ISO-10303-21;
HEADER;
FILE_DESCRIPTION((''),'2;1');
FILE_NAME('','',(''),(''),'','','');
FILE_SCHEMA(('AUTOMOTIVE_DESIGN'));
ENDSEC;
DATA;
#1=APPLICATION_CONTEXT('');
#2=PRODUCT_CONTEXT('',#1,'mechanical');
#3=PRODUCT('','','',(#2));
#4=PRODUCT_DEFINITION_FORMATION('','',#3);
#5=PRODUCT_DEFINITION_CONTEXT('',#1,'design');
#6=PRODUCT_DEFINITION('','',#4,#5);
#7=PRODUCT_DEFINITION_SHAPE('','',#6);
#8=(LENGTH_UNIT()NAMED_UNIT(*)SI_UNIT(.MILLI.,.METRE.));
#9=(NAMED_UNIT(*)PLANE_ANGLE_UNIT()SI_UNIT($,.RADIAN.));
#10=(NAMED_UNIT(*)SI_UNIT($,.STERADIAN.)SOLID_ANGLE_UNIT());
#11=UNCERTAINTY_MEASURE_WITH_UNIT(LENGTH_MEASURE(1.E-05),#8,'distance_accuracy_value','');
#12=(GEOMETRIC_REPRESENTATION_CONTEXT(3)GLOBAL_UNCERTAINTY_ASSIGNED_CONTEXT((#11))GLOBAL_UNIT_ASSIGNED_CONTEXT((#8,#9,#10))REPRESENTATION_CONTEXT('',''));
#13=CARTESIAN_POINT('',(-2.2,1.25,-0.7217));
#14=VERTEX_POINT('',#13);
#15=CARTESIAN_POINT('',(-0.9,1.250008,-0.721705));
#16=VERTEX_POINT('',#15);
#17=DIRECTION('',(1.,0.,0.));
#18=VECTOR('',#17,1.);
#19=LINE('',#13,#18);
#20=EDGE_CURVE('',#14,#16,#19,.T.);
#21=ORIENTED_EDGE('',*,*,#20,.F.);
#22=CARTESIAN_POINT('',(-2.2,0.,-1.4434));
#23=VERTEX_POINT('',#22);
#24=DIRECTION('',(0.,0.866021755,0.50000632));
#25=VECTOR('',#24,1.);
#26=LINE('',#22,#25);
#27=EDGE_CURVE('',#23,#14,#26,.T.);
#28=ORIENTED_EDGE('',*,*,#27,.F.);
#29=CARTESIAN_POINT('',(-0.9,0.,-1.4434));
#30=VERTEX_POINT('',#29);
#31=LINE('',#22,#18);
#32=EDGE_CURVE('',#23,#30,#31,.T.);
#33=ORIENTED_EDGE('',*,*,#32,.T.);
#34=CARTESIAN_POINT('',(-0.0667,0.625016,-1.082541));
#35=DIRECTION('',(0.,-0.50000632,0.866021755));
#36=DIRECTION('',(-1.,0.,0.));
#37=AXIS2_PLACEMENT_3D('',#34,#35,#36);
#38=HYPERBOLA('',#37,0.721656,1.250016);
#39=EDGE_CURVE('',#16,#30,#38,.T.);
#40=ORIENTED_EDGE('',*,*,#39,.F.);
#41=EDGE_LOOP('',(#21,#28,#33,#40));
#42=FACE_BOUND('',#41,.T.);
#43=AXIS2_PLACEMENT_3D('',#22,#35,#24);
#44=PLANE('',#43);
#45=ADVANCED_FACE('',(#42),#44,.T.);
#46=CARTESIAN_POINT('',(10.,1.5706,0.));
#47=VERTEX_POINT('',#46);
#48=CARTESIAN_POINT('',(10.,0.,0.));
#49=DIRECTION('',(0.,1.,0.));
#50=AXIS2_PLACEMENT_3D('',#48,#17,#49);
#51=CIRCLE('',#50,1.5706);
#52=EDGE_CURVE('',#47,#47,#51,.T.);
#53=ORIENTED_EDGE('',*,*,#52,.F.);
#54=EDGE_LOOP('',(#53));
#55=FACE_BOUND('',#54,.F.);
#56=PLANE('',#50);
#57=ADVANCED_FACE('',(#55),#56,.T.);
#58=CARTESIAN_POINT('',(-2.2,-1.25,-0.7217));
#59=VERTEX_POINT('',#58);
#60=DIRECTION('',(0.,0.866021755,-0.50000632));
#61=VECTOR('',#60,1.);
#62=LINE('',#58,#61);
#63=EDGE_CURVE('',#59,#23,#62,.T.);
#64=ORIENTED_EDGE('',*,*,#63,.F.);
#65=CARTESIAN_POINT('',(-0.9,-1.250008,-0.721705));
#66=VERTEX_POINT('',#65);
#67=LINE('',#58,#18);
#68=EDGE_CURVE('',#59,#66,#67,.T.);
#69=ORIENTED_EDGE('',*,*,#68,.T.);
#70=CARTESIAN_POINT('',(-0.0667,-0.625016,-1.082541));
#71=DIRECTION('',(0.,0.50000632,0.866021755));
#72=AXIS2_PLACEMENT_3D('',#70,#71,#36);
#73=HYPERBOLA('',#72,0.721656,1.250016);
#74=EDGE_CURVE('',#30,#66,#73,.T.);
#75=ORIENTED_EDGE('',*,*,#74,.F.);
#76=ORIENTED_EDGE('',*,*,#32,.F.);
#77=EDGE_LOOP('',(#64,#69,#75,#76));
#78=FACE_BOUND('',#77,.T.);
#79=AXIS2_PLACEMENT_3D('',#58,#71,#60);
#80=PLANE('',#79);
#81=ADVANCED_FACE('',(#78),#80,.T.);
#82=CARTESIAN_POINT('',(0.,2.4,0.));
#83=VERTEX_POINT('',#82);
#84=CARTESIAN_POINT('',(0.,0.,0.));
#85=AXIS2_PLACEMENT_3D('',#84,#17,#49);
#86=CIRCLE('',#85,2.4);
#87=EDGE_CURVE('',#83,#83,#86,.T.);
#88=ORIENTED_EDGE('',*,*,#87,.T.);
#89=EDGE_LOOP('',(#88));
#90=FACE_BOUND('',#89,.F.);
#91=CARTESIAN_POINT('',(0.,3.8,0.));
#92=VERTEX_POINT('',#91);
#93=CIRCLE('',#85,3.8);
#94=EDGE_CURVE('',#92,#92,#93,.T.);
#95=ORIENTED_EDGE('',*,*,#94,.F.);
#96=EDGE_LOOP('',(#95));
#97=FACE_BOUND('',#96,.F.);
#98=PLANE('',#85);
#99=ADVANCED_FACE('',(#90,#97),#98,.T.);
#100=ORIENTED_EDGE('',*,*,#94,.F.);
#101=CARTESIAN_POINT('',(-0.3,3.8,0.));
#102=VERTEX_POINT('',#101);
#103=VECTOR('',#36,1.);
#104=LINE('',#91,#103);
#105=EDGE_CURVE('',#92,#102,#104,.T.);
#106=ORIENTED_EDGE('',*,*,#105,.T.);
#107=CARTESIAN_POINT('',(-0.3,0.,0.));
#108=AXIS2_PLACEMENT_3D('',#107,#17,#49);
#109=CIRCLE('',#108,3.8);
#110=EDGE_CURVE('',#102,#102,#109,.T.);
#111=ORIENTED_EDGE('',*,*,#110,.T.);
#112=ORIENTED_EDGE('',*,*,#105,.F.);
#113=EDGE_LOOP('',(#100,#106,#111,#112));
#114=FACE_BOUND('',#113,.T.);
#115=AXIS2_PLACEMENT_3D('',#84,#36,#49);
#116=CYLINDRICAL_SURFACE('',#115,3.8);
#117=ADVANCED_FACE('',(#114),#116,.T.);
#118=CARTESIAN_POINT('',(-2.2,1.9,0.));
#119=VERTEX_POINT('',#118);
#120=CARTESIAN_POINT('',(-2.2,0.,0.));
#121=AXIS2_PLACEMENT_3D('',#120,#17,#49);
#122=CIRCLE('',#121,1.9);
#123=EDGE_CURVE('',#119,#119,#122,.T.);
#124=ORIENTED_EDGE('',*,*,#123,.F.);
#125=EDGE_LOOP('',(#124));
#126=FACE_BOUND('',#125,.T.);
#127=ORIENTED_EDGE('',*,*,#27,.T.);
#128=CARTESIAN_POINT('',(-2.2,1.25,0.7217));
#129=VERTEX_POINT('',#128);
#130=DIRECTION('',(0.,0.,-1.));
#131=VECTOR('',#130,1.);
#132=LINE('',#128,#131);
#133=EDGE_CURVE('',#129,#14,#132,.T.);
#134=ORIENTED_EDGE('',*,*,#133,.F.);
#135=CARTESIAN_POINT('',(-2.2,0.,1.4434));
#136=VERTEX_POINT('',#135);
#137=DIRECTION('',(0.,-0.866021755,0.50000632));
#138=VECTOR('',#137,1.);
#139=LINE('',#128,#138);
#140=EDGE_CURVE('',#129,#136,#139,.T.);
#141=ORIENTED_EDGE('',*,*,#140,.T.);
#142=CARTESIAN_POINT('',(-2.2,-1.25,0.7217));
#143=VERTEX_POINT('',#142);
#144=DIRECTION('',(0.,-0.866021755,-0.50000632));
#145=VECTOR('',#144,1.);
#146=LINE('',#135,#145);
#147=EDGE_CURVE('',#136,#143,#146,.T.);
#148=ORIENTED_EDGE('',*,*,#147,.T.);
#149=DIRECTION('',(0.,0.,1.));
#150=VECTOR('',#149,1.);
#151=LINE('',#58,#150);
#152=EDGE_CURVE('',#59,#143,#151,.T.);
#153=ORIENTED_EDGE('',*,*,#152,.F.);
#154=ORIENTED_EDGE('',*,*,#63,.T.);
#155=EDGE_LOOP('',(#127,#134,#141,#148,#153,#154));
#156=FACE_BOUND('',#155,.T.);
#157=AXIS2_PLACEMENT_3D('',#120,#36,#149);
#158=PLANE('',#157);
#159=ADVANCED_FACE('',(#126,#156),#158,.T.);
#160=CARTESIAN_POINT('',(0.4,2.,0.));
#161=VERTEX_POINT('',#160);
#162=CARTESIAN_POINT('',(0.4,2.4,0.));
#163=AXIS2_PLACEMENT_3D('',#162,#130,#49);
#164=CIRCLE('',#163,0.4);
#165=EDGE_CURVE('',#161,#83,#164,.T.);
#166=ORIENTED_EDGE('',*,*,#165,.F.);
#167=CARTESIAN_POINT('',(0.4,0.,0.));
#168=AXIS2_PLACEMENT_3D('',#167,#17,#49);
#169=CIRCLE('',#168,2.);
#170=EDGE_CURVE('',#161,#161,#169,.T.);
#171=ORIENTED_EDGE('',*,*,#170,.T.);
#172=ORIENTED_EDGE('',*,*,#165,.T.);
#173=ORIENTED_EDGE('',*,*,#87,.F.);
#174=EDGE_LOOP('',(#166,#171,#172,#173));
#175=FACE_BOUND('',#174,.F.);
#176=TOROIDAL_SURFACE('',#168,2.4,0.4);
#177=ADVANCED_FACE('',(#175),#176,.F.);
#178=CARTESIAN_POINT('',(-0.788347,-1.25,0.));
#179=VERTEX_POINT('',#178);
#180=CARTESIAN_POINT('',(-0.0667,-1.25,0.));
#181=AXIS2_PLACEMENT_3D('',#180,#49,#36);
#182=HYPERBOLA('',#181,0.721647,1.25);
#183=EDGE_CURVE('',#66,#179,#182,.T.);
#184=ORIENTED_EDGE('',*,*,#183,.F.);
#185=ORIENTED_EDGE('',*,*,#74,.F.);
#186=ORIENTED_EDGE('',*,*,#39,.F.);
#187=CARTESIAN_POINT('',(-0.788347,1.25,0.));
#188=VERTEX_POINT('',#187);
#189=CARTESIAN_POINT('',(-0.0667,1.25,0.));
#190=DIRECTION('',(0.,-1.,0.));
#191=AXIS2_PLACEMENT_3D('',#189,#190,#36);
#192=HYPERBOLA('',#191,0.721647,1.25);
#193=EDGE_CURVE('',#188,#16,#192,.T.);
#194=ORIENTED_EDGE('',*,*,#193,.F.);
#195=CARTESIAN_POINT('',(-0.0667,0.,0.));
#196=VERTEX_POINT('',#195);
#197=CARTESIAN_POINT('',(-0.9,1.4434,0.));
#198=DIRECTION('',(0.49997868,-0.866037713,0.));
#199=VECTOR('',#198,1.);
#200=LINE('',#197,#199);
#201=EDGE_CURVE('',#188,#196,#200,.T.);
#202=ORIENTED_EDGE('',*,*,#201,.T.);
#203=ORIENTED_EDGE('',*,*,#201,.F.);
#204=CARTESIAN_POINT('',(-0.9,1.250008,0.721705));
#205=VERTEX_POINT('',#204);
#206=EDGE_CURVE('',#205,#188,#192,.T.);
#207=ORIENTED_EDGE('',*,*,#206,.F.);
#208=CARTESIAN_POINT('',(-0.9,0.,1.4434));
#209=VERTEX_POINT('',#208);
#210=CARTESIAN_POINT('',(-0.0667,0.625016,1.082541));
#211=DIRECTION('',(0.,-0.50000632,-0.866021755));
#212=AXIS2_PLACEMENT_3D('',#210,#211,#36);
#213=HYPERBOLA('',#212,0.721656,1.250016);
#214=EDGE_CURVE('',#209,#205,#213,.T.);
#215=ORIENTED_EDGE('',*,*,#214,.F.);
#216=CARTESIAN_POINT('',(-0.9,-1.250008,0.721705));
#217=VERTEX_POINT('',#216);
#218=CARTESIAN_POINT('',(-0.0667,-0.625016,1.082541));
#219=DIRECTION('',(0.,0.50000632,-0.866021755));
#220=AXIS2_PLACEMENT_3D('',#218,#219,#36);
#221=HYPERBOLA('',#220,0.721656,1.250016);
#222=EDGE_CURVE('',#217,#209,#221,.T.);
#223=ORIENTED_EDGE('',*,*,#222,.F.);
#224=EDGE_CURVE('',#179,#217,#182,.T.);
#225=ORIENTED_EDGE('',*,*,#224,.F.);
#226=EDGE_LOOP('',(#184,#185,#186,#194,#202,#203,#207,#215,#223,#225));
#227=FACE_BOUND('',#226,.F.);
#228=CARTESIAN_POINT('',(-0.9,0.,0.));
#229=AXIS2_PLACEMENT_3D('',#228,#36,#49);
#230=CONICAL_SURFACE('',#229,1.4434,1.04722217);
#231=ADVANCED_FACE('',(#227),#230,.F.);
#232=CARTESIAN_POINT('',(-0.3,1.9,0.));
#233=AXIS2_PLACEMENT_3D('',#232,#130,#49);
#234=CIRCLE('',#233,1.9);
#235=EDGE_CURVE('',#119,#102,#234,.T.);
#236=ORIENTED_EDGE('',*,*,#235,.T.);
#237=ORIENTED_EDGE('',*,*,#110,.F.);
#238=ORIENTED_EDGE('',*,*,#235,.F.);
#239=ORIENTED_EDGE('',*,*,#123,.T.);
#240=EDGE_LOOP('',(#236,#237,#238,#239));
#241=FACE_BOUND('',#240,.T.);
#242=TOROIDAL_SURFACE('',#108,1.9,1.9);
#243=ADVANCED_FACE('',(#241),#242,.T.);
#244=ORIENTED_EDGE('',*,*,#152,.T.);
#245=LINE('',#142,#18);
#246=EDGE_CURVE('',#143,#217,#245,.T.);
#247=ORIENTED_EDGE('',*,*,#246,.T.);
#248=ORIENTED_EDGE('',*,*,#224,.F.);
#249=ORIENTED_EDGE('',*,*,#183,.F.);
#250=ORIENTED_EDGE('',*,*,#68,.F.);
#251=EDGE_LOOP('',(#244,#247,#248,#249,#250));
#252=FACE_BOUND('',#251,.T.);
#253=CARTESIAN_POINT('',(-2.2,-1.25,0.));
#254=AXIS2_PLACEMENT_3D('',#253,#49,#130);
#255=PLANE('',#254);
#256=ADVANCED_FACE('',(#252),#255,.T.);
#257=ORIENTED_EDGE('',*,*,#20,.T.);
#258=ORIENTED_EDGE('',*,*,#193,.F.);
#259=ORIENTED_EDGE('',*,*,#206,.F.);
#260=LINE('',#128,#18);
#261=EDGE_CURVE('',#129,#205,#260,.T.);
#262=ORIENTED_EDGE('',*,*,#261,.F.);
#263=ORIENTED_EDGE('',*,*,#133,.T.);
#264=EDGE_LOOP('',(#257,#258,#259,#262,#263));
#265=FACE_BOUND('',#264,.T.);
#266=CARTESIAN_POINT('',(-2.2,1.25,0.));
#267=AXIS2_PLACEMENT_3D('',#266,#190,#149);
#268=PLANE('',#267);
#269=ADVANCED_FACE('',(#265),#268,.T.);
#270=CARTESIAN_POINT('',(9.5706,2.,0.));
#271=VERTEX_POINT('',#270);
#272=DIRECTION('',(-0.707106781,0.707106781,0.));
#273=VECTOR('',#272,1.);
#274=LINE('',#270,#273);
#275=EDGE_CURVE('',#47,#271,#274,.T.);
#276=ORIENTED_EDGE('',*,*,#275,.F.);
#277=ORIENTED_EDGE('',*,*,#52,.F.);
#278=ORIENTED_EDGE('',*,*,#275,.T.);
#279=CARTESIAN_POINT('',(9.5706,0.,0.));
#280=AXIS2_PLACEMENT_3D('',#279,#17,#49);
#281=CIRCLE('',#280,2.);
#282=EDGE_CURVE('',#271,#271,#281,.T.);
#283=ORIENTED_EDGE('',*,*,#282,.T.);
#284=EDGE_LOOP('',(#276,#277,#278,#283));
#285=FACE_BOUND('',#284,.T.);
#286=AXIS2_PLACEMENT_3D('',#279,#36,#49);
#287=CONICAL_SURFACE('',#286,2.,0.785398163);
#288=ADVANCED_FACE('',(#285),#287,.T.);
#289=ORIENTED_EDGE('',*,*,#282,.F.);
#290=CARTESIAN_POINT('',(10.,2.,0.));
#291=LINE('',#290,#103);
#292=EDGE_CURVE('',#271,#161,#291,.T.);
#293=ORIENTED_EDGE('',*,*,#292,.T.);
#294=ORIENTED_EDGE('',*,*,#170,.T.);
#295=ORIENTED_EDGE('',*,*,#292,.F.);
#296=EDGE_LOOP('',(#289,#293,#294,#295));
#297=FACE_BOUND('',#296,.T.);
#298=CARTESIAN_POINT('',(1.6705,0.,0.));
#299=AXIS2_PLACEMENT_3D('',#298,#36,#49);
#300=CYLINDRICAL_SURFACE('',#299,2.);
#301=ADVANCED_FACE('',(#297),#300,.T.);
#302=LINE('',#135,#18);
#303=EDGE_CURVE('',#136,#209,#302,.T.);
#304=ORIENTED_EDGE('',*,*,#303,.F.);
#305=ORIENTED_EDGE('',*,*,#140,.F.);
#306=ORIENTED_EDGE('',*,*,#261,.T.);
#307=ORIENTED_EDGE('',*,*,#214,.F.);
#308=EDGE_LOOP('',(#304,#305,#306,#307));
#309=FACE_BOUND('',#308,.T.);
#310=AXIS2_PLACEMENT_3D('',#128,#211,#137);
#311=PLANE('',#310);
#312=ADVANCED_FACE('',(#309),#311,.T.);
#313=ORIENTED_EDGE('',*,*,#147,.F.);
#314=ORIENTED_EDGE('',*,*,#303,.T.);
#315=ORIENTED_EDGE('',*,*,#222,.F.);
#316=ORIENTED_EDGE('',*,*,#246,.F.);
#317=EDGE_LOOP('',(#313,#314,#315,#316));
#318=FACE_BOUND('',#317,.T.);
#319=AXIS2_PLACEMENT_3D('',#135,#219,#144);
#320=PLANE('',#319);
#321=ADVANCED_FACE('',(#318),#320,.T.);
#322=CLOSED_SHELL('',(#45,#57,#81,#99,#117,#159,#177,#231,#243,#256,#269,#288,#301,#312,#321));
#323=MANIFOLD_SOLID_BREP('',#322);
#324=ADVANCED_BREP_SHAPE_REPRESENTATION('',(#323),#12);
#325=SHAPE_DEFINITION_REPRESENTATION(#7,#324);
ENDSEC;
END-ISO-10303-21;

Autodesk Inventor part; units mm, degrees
ref_plane "YZ Plane" through (0, 0, 0) normal (1, 0, 0) x (0, 1, 0)
ref_plane "XZ Plane" through (0, 0, 0) normal (0, 1, 0) x (-1, 0, 0)
sketch "Sketch1" plane through (0, 0, 0) normal (0, 0, 1) x (1, 0, 0)
  line L0 (-0.0667, 0) -> (10, 0)
  line L1 (10, 0) -> (10, 2)
  line L2 (10, 2) -> (2.1, 2)
  line L3 (2.1, 2) -> (1.6705, 2)
  line L4 (1.6705, 2) -> (0, 2)
  line L5 (0, 2) -> (0, 3.8)
  line L6 (0, 3.8) -> (-2.2, 3.8)
  line L7 (-2.2, 3.8) -> (-2.2, 1.4434)
  line L8 (-2.2, 1.4434) -> (-0.9, 1.4434)
  line L9 (-0.9, 1.4434) -> (-0.0667, 0)
  line L10 (-4.64, 0) -> (12.44, 0) projected
  line L11 (0, -0.76) -> (0, 4.56) projected
  line L12 (2.1, 2) -> (0, 2) construction
  dimension "d1" = 7.9
  dimension "d2" = 0.4295
  dimension "d3" = 2.2
  dimension "d4" = 1.3
  dimension "d5" = 60
  dimension "d6" = 4
  dimension "d7" = 4
  dimension "d8" = 2.8868
  dimension "d9" = 7.6
  dimension "d26" = 10
revolve "Body" add sketch "Sketch1" angle 360 about axis through (-0.0667, 0, 0) along (1, 0, 0)
sketch "Sketch2" plane through (-2.2, 0, 0) normal (-1, 0, 0) x (0, 0, 1)
  circle A0 centre (0, 0) radius 1.4434 projected
  line L0 (0, -5.32) -> (0, 5.32) projected
  line L1 (-5.32, 0) -> (5.32, 0) projected
  line L2 (1.4434, 0) -> (0.7217, -1.25)
  line L3 (0.7217, -1.25) -> (-0.7217, -1.25)
  line L4 (-0.7217, -1.25) -> (-1.4434, 0)
  line L5 (-1.4434, 0) -> (-0.7217, 1.25)
  line L6 (-0.7217, 1.25) -> (0.7217, 1.25)
  line L7 (0.7217, 1.25) -> (1.4434, 0)
extrude "Slot" add sketch "Sketch2" against normal up to next contours L7 A0 | A0 L2 | L6 L0 A0 | A0 L0 L3 | L0 L6 A0 | A0 L3 L0 | L4 A0 | A0 L5
fillet "Fillet1" radius 1.9 1 edges at (-2.2, -3.8, 0)
thread "Thread" size "M4x0.7" class "6g" standard "ISO Metric profile" length 7.9
chamfer "Chamfer1" distance 0.4294 distance2 0.4294 1 edges at (10, -2, 0) measured on face at (10, 0.556, 0.0273)
ref_plane "Work Plane1" through (29, 0, 0) normal (0, -1, 0) x (1, 0, 0)
fillet "Fillet2" radius 0.4 1 edges at (0, -2, 0)
equation "\"d1\" = GEL"
equation "\"d3\" = KOH"
equation "\"d4\" = INTI"
equation "\"d6\" = GD"
equation "\"d7\" = BDM"
equation "\"d8\" = 1.1547 * SW"
equation "\"d9\" = KOD"
equation "\"d26\" = NLG"
equation "\"d30\" = R"
equation "\"d17\" = RR"
equation "\"d13\" = GEL"
equation "\"d15\" = -0.5 * SPD + 0.5 * GD"
equation "\"d16\" = GUL"
equation "\"GD\" = NND"
equation "\"NLG\" = 10"
equation "\"GEL\" = 7.9"
equation "\"KOD\" = 7.6"
equation "\"KOH\" = 2.2"
equation "\"INTI\" = 1.3"
equation "\"GAL\" = 0.61345 * PTC"
equation "\"GUL\" = 0.61345 * PTC"
equation "\"BDM\" = NND"
equation "\"SW\" = 2.5"
equation "\"RR\" = 1.9"
equation "\"SPD\" = NND - 1.2269 * PTC"
equation "\"R\" = 0.4"
equation "\"TOA\" = 30deg"
equation "\"GD1\" = THREADDIA - 1.2269 * PTC"
equation "\"THREADDIA\" = 4"
equation "\"PTC\" = 0.7"
equation "\"NND\" = 4"
equation "\"KOH1\" = 0.3"
equation "\"E0\" = 2.873"
properties part number "M4 x 10 (AL Profile)" material "Steel"
